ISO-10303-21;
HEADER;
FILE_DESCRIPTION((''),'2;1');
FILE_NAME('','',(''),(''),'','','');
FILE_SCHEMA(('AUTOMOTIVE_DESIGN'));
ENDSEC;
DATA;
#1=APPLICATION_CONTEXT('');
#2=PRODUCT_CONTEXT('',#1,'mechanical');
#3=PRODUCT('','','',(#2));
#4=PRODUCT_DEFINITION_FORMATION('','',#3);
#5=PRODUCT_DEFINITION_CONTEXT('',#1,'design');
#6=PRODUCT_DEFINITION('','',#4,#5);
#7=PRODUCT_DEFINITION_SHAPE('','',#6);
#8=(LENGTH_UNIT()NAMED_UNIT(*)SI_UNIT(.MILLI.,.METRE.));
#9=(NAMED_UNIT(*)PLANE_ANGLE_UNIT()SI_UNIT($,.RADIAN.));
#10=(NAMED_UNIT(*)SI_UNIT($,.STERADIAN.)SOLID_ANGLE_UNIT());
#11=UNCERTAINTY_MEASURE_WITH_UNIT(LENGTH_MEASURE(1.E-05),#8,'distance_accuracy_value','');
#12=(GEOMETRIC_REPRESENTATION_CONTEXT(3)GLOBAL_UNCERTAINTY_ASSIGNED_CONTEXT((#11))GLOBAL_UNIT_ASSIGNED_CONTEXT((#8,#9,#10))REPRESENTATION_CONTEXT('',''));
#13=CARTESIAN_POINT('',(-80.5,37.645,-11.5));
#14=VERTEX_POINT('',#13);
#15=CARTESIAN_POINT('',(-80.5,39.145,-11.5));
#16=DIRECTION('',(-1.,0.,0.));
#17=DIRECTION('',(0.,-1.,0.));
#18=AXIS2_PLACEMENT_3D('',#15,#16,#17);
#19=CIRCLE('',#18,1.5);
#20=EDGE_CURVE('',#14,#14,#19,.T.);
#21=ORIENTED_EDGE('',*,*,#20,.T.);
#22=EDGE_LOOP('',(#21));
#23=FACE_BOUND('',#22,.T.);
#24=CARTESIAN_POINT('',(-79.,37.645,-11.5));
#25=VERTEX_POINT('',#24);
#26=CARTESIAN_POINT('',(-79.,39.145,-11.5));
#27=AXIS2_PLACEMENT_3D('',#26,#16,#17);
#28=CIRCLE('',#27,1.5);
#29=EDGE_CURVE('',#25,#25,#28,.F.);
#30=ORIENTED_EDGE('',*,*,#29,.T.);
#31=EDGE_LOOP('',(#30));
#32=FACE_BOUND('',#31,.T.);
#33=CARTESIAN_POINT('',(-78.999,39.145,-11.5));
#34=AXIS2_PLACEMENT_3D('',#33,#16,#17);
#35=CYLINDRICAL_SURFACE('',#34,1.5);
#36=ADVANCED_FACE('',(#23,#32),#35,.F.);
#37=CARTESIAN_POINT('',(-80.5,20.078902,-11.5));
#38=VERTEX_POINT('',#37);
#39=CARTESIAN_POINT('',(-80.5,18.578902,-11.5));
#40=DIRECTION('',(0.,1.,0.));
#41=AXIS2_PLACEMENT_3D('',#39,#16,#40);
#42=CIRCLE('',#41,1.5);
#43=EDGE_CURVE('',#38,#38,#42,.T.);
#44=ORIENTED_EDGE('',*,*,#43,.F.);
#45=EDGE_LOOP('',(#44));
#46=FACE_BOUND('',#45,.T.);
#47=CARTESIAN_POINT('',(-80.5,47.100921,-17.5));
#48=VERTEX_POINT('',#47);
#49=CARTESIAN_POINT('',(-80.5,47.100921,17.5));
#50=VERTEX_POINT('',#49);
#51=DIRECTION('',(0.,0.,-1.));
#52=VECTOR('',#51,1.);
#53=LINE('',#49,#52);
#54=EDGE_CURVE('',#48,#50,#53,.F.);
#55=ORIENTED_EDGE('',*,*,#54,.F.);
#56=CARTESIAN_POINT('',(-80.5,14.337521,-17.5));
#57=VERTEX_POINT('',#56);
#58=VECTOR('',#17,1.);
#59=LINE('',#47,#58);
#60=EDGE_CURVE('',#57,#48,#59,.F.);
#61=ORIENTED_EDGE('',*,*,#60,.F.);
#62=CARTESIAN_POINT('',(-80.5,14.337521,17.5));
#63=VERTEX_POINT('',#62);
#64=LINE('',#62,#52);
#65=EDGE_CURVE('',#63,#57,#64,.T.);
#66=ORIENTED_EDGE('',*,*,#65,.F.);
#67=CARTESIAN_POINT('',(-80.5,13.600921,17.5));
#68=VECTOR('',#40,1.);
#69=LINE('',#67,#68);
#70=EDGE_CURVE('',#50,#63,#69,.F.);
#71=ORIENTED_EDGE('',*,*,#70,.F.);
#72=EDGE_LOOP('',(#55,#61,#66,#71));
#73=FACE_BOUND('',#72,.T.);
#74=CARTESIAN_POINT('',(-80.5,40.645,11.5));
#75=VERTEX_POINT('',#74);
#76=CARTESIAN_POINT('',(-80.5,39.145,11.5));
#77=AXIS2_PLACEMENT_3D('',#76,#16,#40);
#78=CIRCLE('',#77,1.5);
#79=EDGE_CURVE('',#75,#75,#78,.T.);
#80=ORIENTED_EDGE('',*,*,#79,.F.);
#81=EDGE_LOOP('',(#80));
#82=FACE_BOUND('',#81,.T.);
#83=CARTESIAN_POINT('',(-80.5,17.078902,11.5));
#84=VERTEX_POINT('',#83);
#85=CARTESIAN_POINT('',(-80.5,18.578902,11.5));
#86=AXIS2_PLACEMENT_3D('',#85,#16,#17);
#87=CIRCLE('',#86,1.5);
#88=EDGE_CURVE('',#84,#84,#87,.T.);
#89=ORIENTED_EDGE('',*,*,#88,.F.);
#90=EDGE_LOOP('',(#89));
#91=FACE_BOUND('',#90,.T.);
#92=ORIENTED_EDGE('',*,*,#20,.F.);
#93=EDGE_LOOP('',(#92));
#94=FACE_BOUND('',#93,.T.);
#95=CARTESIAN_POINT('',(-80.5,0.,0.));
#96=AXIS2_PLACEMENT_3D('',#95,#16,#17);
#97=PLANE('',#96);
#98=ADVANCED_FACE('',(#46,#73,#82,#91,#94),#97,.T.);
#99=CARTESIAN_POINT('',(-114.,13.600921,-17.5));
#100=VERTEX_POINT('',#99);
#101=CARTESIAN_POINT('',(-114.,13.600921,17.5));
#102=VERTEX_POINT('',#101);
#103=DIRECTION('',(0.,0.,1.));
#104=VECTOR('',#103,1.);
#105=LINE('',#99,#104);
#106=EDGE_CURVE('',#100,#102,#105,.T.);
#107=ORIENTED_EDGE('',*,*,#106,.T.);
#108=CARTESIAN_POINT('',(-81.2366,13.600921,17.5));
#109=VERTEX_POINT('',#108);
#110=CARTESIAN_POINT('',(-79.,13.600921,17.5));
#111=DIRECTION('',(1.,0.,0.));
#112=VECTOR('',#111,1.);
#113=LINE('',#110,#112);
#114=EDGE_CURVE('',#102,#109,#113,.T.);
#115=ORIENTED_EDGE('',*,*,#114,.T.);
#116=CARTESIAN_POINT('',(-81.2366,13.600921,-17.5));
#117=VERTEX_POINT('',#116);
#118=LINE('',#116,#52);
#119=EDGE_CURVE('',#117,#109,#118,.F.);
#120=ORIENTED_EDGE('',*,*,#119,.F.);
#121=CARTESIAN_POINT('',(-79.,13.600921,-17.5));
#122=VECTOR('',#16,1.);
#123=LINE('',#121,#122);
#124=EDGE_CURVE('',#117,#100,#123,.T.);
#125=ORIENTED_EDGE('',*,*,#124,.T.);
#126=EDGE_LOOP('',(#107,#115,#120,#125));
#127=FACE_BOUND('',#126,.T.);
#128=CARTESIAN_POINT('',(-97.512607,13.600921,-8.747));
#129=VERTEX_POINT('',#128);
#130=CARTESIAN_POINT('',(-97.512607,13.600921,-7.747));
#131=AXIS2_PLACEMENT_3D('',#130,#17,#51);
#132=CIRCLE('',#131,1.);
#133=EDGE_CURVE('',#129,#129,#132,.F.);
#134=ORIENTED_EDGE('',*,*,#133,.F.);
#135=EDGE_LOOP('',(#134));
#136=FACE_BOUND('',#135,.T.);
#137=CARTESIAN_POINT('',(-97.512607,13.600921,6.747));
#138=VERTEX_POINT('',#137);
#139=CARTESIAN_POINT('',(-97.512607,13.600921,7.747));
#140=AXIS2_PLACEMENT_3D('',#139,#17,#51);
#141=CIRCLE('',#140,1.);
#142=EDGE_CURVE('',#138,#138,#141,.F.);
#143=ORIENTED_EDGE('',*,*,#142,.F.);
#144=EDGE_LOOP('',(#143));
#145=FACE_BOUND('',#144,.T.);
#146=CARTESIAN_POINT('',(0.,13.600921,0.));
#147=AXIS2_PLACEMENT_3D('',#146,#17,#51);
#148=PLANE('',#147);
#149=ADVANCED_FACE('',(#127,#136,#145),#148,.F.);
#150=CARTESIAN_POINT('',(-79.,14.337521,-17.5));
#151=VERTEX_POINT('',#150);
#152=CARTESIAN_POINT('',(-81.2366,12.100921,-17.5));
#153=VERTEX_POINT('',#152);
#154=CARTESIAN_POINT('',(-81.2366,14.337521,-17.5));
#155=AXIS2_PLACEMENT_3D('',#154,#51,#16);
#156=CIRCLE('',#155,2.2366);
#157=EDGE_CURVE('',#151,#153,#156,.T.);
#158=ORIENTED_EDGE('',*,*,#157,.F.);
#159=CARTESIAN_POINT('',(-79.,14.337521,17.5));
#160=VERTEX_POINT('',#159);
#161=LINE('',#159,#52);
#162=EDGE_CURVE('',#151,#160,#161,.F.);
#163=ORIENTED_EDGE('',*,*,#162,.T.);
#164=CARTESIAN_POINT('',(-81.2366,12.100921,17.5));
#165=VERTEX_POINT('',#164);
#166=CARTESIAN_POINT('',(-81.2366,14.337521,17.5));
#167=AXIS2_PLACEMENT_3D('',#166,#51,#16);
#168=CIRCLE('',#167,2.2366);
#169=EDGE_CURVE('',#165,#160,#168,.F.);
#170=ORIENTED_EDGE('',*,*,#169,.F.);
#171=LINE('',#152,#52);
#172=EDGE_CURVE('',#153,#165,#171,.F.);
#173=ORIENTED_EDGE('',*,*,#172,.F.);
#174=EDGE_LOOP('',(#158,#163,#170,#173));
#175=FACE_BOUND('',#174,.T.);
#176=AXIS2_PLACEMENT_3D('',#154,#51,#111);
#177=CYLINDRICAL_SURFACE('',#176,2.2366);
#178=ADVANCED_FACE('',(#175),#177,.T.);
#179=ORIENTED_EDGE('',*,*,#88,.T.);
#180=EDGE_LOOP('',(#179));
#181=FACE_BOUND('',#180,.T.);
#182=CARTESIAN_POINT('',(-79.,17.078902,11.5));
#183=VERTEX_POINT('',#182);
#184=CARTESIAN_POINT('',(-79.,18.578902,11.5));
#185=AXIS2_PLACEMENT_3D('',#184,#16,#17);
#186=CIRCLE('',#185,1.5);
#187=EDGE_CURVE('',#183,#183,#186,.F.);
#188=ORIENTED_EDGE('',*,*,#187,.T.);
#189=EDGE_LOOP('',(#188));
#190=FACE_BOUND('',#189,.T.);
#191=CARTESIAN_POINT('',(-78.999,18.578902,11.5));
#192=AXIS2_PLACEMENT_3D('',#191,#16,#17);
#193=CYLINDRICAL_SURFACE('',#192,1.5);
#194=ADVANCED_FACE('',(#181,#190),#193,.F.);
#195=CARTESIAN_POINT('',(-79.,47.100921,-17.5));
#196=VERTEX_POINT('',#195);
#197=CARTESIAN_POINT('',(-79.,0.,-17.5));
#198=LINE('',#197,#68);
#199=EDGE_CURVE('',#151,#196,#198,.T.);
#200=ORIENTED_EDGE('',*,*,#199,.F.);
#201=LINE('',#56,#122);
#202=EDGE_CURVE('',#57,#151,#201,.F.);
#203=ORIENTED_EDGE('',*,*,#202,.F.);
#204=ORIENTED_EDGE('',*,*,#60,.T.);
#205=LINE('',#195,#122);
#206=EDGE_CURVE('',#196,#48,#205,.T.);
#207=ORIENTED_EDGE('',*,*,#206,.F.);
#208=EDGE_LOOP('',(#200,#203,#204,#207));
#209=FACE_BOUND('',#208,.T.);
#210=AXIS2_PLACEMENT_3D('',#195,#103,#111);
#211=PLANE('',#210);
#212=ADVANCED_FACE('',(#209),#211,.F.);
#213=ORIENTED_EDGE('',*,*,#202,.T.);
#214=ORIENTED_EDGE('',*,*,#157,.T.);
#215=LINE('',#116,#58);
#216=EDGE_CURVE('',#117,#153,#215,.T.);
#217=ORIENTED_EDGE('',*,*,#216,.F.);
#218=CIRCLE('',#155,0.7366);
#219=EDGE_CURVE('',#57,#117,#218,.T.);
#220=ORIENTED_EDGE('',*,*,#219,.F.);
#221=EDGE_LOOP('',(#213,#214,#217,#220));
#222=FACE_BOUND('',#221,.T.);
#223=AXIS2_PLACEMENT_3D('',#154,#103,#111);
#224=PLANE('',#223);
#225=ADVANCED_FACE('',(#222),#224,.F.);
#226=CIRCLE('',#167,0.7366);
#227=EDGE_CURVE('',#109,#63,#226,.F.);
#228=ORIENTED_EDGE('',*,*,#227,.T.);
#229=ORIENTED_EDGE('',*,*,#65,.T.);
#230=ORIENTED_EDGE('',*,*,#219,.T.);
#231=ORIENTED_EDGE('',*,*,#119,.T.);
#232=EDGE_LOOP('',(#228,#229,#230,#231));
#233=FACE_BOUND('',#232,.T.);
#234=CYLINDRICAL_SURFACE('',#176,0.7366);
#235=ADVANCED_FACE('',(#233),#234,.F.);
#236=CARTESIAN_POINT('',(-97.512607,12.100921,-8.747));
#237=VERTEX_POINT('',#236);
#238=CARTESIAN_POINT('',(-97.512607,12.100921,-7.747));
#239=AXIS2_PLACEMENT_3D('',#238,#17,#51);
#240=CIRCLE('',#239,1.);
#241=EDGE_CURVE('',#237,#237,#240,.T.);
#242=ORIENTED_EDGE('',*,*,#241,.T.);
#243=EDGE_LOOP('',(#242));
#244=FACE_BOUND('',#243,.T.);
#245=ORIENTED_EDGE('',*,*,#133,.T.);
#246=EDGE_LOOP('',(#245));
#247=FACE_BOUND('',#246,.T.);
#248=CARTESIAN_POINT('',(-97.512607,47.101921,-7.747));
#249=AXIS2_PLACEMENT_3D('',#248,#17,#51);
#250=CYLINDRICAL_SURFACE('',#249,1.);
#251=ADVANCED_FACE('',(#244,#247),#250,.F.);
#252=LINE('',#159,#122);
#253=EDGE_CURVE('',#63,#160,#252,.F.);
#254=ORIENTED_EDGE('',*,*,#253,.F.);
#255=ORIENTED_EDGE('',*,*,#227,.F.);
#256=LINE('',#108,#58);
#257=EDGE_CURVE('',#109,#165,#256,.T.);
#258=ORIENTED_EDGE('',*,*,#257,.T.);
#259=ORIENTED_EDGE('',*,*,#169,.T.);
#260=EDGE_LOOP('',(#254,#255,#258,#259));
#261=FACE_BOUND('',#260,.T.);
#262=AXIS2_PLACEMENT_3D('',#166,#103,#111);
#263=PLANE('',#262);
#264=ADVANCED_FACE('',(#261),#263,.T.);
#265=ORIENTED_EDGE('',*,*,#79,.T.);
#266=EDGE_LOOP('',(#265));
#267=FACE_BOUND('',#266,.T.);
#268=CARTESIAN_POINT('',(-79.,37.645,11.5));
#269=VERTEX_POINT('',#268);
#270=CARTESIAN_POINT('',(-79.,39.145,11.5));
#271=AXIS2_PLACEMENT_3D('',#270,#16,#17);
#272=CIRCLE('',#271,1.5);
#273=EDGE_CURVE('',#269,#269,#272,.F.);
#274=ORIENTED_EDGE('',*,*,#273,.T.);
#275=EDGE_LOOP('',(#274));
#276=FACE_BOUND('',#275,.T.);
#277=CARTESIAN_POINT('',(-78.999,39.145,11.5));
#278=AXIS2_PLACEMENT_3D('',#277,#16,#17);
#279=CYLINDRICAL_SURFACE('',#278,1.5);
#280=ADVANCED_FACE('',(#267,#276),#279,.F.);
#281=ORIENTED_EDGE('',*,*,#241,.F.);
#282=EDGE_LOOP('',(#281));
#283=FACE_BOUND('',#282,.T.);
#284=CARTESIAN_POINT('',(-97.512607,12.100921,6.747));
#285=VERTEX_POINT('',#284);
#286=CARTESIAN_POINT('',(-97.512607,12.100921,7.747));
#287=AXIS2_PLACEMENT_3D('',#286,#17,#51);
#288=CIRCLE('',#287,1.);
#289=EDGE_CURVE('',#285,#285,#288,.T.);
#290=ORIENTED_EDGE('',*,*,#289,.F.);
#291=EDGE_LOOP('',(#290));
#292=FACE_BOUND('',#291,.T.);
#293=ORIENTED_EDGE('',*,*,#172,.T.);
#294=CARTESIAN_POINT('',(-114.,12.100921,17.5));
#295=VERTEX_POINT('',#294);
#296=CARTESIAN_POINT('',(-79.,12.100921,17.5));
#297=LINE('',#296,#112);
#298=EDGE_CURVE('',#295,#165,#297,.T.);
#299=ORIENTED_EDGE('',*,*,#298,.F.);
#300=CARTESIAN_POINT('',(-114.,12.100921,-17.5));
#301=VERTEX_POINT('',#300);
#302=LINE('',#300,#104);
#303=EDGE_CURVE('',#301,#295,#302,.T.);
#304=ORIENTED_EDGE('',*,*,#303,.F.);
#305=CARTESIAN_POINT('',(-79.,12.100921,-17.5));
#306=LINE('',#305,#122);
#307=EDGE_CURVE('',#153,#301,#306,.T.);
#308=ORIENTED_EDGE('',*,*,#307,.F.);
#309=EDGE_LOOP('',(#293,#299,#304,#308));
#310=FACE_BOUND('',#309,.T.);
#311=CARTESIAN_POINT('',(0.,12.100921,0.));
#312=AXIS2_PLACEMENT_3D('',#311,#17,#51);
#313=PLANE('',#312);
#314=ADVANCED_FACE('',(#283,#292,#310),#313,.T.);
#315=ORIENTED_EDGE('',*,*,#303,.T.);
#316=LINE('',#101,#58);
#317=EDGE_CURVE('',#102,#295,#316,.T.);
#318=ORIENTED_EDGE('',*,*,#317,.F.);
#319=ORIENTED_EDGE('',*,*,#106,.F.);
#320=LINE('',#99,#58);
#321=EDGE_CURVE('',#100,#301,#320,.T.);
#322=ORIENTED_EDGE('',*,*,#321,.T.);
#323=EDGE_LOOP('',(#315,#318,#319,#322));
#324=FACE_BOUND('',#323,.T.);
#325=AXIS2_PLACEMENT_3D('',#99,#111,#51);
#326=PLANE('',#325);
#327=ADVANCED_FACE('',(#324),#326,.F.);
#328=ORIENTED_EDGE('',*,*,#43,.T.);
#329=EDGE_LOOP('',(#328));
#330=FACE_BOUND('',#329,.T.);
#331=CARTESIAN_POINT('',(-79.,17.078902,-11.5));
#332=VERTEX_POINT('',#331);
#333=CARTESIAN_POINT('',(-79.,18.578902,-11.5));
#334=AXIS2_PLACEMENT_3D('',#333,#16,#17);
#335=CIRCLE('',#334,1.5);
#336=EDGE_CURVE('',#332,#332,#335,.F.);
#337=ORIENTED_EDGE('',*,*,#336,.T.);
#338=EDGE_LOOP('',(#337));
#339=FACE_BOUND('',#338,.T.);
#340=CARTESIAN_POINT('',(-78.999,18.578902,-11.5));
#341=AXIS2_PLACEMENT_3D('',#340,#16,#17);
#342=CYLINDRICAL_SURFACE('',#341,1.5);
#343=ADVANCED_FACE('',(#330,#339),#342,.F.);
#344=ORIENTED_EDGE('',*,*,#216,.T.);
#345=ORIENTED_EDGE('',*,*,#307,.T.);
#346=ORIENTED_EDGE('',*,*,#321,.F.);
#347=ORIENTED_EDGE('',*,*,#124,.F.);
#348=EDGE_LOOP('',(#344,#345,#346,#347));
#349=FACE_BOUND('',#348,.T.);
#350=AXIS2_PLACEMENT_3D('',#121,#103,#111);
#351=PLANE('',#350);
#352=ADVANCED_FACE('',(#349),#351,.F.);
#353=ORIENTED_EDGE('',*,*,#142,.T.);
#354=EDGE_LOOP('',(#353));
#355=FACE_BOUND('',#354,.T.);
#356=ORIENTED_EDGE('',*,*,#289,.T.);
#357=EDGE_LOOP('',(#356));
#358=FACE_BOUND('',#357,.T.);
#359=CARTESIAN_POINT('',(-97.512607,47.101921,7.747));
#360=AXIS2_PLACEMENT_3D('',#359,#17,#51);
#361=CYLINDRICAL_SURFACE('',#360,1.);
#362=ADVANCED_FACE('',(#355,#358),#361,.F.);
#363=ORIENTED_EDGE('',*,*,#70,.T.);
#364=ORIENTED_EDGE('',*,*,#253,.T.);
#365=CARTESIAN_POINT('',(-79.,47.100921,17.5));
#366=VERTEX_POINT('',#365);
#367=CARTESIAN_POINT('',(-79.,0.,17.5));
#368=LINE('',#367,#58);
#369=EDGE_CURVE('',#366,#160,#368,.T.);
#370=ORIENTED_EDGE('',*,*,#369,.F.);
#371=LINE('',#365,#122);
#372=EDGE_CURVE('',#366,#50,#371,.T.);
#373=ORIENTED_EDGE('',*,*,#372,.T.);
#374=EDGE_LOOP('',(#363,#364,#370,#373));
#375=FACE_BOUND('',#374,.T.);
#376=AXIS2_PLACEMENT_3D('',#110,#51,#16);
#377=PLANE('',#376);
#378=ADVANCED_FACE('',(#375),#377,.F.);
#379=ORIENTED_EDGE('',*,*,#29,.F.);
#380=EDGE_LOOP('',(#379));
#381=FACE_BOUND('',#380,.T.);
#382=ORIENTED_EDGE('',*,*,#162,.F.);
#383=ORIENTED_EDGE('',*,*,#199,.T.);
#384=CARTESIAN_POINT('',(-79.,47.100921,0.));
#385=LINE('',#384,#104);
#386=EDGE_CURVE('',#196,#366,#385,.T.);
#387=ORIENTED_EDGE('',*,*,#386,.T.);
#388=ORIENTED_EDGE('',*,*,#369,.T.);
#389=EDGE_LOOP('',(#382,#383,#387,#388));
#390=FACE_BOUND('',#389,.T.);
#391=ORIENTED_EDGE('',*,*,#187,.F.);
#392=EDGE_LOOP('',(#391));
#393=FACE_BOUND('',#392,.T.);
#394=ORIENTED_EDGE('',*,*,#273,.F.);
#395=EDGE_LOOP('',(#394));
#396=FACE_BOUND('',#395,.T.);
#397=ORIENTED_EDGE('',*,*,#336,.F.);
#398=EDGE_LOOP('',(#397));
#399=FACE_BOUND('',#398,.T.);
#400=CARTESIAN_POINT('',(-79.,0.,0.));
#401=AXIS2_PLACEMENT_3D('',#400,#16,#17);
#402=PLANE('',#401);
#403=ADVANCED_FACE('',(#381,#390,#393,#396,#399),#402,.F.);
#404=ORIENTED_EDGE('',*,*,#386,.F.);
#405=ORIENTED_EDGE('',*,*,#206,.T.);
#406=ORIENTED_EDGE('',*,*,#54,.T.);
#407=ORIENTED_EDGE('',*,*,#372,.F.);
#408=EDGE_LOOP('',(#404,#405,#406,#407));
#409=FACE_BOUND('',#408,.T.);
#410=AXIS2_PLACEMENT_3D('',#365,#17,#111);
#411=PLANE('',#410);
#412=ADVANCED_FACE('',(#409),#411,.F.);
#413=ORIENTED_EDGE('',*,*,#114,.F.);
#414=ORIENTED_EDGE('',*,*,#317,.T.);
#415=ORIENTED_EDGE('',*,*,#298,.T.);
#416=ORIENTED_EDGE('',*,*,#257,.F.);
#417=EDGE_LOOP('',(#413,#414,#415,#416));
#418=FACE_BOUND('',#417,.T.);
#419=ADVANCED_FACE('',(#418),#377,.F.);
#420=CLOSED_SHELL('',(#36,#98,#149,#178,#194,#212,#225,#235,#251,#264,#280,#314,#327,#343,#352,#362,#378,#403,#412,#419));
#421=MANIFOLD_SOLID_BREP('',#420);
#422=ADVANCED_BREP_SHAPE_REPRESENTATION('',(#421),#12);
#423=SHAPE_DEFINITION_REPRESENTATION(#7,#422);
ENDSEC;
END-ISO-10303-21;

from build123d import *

# Parameters (mm, degrees)
SKETCH1_W                    = 35
SKETCH1_H                    = 35
BASE_FLANGE1_DEPTH           = 1.5
EDGE_FLANGE1_STRIP_W         = 7.4732
EDGE_FLANGE1_STRIP_H         = 1.5
EDGE_FLANGE1_STRIP_CUT_DEPTH = 35
EDGE_FLANGE1_DEPTH           = 35
CUT_EXTRUDE1_REACH           = 62.39
SKETCH9_R                    = 1.5
CUT_EXTRUDE2_REACH           = 122.529
SKETCH10_R                   = 1


# Sheet-metal steps are written as plain solids
with BuildPart() as part:
    # Sketch1 → Base-Flange1 (new body)
    with BuildSketch(Plane(origin=(0, 12.100921456, 0), x_dir=(1, 0, 0), z_dir=(0, 1, 0))):
        with Locations((-96.5, 0)):
            Rectangle(SKETCH1_W, SKETCH1_H)
    extrude(amount=BASE_FLANGE1_DEPTH)

    # Edge-Flange1 strip (across the edge) → Edge-Flange1 strip cut (cut)
    with BuildSketch(Plane(origin=(-79, 13.600921456, 17.5), x_dir=(-1, 0, 0), z_dir=(0, 0, -1))):
        with Locations((-1.5, -0.75)):
            Rectangle(EDGE_FLANGE1_STRIP_W, EDGE_FLANGE1_STRIP_H)
    extrude(amount=EDGE_FLANGE1_STRIP_CUT_DEPTH, mode=Mode.SUBTRACT)

    # Edge-Flange1 section (across the edge) → Edge-Flange1 (add)
    with BuildSketch(Plane(origin=(-79, 13.600921456, 17.5), x_dir=(-1, 0, 0), z_dir=(0, 0, -1))):
        with BuildLine():
            Line((0, 0.7366), (0, 33.5))
            Line((0, 33.5), (1.5, 33.5))
            Line((1.5, 33.5), (1.5, 0.7366))
            ThreePointArc((1.5, 0.7366), (1.715745145, 0.215745145), (2.2366, 0))
            Line((2.2366, 0), (2.2366, -1.5))
            ThreePointArc((2.2366, -1.5), (0.655084973, -0.844915027), (0, 0.7366))
        make_face()
    extrude(amount=EDGE_FLANGE1_DEPTH)

    # Sketch9 → Cut-Extrude1 (cut, up to next)
    with BuildSketch(Plane.ZY.offset(80.5), mode=Mode.PRIVATE) as cut_extrude1_sk1:
        with Locations(Location((-11.5, 39.145, 0), (0, 0, 270))):
            Circle(SKETCH9_R)
    cut_extrude1_tool1 = extrude(cut_extrude1_sk1.sketch, amount=-CUT_EXTRUDE1_REACH, mode=Mode.PRIVATE) & part.part
    # Sketch9 → Cut-Extrude1 (cut, up to next)
    with BuildSketch(Plane.ZY.offset(80.5), mode=Mode.PRIVATE) as cut_extrude1_sk2:
        with Locations(Location((11.5, 39.145, 0), (0, 0, 270))):
            Circle(SKETCH9_R)
    cut_extrude1_tool2 = extrude(cut_extrude1_sk2.sketch, amount=-CUT_EXTRUDE1_REACH, mode=Mode.PRIVATE) & part.part
    # Sketch9 → Cut-Extrude1 (cut, up to next)
    with BuildSketch(Plane.ZY.offset(80.5), mode=Mode.PRIVATE) as cut_extrude1_sk3:
        with Locations(Location((11.5, 18.578902177, 0), (0, 0, 270))):
            Circle(SKETCH9_R)
    cut_extrude1_tool3 = extrude(cut_extrude1_sk3.sketch, amount=-CUT_EXTRUDE1_REACH, mode=Mode.PRIVATE) & part.part
    # Sketch9 → Cut-Extrude1 (cut, up to next)
    with BuildSketch(Plane.ZY.offset(80.5), mode=Mode.PRIVATE) as cut_extrude1_sk4:
        with Locations(Location((-11.5, 18.578902177, 0), (0, 0, 270))):
            Circle(SKETCH9_R)
    cut_extrude1_tool4 = extrude(cut_extrude1_sk4.sketch, amount=-CUT_EXTRUDE1_REACH, mode=Mode.PRIVATE) & part.part
    add(cut_extrude1_tool1.solids().sort_by_distance((-80.5, 39.145, -11.5))[0], mode=Mode.SUBTRACT)
    add(cut_extrude1_tool2.solids().sort_by_distance((-80.5, 39.145, 11.5))[0], mode=Mode.SUBTRACT)
    add(cut_extrude1_tool3.solids().sort_by_distance((-80.5, 18.578902, 11.5))[0], mode=Mode.SUBTRACT)
    add(cut_extrude1_tool4.solids().sort_by_distance((-80.5, 18.578902, -11.5))[0], mode=Mode.SUBTRACT)

    # Sketch10 → Cut-Extrude2 (cut, up to next)
    with BuildSketch(Plane.XZ.offset(-12.100921456), mode=Mode.PRIVATE) as cut_extrude2_sk1:
        with Locations(Location((-97.512607475, -7.747, 0), (0, 0, 270))):
            Circle(SKETCH10_R)
    cut_extrude2_tool1 = extrude(cut_extrude2_sk1.sketch, amount=-CUT_EXTRUDE2_REACH, mode=Mode.PRIVATE) & part.part
    # Sketch10 → Cut-Extrude2 (cut, up to next)
    with BuildSketch(Plane.XZ.offset(-12.100921456), mode=Mode.PRIVATE) as cut_extrude2_sk2:
        with Locations(Location((-97.512607475, 7.747, 0), (0, 0, 270))):
            Circle(SKETCH10_R)
    cut_extrude2_tool2 = extrude(cut_extrude2_sk2.sketch, amount=-CUT_EXTRUDE2_REACH, mode=Mode.PRIVATE) & part.part
    add(cut_extrude2_tool1.solids().sort_by_distance((-97.512607, 12.100921, -7.747))[0], mode=Mode.SUBTRACT)
    add(cut_extrude2_tool2.solids().sort_by_distance((-97.512607, 12.100921, 7.747))[0], mode=Mode.SUBTRACT)


solid = part.part
